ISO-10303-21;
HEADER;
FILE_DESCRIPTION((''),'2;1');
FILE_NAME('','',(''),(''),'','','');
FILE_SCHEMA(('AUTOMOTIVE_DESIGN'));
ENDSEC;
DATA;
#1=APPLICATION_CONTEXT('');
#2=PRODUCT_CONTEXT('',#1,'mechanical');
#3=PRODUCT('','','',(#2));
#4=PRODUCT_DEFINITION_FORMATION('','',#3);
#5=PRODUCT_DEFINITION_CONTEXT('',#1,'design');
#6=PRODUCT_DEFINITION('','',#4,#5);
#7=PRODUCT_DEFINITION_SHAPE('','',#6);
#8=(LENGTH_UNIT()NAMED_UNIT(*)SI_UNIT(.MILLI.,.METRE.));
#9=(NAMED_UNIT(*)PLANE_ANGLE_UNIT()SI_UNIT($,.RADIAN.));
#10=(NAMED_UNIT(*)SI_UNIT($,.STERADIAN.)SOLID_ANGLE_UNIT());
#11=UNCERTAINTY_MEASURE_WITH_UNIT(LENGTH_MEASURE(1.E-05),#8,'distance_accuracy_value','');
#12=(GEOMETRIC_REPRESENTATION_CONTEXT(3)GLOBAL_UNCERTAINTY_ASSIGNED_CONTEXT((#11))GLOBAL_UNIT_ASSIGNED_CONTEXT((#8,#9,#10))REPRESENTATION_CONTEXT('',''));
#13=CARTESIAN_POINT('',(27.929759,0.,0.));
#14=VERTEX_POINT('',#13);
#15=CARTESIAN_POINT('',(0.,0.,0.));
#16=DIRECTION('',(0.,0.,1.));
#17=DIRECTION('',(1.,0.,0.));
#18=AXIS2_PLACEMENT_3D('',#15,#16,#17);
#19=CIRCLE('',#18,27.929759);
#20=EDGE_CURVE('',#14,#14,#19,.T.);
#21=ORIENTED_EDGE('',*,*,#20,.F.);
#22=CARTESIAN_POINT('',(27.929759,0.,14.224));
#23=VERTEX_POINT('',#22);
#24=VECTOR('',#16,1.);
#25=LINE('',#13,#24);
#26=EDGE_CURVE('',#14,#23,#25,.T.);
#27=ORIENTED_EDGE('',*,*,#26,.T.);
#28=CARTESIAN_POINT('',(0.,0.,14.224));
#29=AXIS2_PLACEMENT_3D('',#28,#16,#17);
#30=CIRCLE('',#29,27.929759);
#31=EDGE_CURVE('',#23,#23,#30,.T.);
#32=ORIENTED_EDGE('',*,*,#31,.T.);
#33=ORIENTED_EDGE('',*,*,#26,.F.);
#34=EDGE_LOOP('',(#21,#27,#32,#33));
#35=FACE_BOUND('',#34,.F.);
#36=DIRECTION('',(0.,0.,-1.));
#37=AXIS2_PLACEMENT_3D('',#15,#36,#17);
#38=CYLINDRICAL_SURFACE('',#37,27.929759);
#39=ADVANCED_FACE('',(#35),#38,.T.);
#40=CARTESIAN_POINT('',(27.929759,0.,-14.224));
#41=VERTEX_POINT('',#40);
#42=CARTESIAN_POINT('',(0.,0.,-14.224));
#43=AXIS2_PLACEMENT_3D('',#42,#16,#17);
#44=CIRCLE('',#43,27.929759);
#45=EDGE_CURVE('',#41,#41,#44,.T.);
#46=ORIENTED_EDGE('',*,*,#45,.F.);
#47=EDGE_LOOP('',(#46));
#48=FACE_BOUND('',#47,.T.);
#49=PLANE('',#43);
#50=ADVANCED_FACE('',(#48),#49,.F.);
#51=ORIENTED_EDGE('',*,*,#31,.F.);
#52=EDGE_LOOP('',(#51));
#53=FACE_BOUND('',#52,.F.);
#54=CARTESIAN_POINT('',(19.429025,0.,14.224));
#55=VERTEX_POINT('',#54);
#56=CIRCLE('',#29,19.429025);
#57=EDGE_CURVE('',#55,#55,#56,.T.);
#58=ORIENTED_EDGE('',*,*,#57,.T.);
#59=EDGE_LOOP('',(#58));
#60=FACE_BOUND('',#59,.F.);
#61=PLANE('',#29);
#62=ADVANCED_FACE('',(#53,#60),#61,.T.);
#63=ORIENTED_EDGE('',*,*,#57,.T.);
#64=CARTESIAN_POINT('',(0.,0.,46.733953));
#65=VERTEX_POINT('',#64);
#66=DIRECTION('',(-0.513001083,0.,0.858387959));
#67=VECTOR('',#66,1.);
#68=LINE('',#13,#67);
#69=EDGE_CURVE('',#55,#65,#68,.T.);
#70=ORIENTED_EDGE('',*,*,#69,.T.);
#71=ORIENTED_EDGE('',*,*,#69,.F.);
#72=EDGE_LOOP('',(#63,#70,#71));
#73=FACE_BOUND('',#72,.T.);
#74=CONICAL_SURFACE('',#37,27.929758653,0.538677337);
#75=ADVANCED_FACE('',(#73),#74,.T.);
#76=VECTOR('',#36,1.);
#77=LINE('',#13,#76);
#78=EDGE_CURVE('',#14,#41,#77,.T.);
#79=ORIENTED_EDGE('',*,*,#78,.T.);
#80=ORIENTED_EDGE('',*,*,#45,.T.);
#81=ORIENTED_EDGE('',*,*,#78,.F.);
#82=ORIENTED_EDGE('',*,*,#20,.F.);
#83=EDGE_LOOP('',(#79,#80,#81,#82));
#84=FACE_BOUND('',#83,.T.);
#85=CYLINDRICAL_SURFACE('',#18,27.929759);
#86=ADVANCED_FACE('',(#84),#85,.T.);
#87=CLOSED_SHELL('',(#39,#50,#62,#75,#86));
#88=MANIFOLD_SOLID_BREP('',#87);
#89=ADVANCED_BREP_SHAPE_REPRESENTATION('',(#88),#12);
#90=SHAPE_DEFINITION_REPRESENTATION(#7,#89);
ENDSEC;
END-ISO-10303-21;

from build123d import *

# Parameters (mm, degrees)
F9_DEPTH = 14.224


# Not quite as in the source:
# - the program builds the solid bodies; features that only make, move or delete a surface that nothing else refers to are left out


with BuildPart() as f1:
    # F0 (on Front) → F1 (revolve)
    with BuildSketch(Plane.XZ):
        Polygon((0, 46.7339530587), (0, 0), (27.929758653, 0), align=None)
    revolve(axis=Axis((0, 0, 23.3669765294), (0, 0, 1)))

    # F9 (add, symmetric): a face of the model
    f9_faces = [f1.faces().sort_by_distance(p)[0] for p in [
        (0, 0, 0),
    ]]
    extrude(f9_faces, amount=F9_DEPTH, both=True)


solid = f1.part
